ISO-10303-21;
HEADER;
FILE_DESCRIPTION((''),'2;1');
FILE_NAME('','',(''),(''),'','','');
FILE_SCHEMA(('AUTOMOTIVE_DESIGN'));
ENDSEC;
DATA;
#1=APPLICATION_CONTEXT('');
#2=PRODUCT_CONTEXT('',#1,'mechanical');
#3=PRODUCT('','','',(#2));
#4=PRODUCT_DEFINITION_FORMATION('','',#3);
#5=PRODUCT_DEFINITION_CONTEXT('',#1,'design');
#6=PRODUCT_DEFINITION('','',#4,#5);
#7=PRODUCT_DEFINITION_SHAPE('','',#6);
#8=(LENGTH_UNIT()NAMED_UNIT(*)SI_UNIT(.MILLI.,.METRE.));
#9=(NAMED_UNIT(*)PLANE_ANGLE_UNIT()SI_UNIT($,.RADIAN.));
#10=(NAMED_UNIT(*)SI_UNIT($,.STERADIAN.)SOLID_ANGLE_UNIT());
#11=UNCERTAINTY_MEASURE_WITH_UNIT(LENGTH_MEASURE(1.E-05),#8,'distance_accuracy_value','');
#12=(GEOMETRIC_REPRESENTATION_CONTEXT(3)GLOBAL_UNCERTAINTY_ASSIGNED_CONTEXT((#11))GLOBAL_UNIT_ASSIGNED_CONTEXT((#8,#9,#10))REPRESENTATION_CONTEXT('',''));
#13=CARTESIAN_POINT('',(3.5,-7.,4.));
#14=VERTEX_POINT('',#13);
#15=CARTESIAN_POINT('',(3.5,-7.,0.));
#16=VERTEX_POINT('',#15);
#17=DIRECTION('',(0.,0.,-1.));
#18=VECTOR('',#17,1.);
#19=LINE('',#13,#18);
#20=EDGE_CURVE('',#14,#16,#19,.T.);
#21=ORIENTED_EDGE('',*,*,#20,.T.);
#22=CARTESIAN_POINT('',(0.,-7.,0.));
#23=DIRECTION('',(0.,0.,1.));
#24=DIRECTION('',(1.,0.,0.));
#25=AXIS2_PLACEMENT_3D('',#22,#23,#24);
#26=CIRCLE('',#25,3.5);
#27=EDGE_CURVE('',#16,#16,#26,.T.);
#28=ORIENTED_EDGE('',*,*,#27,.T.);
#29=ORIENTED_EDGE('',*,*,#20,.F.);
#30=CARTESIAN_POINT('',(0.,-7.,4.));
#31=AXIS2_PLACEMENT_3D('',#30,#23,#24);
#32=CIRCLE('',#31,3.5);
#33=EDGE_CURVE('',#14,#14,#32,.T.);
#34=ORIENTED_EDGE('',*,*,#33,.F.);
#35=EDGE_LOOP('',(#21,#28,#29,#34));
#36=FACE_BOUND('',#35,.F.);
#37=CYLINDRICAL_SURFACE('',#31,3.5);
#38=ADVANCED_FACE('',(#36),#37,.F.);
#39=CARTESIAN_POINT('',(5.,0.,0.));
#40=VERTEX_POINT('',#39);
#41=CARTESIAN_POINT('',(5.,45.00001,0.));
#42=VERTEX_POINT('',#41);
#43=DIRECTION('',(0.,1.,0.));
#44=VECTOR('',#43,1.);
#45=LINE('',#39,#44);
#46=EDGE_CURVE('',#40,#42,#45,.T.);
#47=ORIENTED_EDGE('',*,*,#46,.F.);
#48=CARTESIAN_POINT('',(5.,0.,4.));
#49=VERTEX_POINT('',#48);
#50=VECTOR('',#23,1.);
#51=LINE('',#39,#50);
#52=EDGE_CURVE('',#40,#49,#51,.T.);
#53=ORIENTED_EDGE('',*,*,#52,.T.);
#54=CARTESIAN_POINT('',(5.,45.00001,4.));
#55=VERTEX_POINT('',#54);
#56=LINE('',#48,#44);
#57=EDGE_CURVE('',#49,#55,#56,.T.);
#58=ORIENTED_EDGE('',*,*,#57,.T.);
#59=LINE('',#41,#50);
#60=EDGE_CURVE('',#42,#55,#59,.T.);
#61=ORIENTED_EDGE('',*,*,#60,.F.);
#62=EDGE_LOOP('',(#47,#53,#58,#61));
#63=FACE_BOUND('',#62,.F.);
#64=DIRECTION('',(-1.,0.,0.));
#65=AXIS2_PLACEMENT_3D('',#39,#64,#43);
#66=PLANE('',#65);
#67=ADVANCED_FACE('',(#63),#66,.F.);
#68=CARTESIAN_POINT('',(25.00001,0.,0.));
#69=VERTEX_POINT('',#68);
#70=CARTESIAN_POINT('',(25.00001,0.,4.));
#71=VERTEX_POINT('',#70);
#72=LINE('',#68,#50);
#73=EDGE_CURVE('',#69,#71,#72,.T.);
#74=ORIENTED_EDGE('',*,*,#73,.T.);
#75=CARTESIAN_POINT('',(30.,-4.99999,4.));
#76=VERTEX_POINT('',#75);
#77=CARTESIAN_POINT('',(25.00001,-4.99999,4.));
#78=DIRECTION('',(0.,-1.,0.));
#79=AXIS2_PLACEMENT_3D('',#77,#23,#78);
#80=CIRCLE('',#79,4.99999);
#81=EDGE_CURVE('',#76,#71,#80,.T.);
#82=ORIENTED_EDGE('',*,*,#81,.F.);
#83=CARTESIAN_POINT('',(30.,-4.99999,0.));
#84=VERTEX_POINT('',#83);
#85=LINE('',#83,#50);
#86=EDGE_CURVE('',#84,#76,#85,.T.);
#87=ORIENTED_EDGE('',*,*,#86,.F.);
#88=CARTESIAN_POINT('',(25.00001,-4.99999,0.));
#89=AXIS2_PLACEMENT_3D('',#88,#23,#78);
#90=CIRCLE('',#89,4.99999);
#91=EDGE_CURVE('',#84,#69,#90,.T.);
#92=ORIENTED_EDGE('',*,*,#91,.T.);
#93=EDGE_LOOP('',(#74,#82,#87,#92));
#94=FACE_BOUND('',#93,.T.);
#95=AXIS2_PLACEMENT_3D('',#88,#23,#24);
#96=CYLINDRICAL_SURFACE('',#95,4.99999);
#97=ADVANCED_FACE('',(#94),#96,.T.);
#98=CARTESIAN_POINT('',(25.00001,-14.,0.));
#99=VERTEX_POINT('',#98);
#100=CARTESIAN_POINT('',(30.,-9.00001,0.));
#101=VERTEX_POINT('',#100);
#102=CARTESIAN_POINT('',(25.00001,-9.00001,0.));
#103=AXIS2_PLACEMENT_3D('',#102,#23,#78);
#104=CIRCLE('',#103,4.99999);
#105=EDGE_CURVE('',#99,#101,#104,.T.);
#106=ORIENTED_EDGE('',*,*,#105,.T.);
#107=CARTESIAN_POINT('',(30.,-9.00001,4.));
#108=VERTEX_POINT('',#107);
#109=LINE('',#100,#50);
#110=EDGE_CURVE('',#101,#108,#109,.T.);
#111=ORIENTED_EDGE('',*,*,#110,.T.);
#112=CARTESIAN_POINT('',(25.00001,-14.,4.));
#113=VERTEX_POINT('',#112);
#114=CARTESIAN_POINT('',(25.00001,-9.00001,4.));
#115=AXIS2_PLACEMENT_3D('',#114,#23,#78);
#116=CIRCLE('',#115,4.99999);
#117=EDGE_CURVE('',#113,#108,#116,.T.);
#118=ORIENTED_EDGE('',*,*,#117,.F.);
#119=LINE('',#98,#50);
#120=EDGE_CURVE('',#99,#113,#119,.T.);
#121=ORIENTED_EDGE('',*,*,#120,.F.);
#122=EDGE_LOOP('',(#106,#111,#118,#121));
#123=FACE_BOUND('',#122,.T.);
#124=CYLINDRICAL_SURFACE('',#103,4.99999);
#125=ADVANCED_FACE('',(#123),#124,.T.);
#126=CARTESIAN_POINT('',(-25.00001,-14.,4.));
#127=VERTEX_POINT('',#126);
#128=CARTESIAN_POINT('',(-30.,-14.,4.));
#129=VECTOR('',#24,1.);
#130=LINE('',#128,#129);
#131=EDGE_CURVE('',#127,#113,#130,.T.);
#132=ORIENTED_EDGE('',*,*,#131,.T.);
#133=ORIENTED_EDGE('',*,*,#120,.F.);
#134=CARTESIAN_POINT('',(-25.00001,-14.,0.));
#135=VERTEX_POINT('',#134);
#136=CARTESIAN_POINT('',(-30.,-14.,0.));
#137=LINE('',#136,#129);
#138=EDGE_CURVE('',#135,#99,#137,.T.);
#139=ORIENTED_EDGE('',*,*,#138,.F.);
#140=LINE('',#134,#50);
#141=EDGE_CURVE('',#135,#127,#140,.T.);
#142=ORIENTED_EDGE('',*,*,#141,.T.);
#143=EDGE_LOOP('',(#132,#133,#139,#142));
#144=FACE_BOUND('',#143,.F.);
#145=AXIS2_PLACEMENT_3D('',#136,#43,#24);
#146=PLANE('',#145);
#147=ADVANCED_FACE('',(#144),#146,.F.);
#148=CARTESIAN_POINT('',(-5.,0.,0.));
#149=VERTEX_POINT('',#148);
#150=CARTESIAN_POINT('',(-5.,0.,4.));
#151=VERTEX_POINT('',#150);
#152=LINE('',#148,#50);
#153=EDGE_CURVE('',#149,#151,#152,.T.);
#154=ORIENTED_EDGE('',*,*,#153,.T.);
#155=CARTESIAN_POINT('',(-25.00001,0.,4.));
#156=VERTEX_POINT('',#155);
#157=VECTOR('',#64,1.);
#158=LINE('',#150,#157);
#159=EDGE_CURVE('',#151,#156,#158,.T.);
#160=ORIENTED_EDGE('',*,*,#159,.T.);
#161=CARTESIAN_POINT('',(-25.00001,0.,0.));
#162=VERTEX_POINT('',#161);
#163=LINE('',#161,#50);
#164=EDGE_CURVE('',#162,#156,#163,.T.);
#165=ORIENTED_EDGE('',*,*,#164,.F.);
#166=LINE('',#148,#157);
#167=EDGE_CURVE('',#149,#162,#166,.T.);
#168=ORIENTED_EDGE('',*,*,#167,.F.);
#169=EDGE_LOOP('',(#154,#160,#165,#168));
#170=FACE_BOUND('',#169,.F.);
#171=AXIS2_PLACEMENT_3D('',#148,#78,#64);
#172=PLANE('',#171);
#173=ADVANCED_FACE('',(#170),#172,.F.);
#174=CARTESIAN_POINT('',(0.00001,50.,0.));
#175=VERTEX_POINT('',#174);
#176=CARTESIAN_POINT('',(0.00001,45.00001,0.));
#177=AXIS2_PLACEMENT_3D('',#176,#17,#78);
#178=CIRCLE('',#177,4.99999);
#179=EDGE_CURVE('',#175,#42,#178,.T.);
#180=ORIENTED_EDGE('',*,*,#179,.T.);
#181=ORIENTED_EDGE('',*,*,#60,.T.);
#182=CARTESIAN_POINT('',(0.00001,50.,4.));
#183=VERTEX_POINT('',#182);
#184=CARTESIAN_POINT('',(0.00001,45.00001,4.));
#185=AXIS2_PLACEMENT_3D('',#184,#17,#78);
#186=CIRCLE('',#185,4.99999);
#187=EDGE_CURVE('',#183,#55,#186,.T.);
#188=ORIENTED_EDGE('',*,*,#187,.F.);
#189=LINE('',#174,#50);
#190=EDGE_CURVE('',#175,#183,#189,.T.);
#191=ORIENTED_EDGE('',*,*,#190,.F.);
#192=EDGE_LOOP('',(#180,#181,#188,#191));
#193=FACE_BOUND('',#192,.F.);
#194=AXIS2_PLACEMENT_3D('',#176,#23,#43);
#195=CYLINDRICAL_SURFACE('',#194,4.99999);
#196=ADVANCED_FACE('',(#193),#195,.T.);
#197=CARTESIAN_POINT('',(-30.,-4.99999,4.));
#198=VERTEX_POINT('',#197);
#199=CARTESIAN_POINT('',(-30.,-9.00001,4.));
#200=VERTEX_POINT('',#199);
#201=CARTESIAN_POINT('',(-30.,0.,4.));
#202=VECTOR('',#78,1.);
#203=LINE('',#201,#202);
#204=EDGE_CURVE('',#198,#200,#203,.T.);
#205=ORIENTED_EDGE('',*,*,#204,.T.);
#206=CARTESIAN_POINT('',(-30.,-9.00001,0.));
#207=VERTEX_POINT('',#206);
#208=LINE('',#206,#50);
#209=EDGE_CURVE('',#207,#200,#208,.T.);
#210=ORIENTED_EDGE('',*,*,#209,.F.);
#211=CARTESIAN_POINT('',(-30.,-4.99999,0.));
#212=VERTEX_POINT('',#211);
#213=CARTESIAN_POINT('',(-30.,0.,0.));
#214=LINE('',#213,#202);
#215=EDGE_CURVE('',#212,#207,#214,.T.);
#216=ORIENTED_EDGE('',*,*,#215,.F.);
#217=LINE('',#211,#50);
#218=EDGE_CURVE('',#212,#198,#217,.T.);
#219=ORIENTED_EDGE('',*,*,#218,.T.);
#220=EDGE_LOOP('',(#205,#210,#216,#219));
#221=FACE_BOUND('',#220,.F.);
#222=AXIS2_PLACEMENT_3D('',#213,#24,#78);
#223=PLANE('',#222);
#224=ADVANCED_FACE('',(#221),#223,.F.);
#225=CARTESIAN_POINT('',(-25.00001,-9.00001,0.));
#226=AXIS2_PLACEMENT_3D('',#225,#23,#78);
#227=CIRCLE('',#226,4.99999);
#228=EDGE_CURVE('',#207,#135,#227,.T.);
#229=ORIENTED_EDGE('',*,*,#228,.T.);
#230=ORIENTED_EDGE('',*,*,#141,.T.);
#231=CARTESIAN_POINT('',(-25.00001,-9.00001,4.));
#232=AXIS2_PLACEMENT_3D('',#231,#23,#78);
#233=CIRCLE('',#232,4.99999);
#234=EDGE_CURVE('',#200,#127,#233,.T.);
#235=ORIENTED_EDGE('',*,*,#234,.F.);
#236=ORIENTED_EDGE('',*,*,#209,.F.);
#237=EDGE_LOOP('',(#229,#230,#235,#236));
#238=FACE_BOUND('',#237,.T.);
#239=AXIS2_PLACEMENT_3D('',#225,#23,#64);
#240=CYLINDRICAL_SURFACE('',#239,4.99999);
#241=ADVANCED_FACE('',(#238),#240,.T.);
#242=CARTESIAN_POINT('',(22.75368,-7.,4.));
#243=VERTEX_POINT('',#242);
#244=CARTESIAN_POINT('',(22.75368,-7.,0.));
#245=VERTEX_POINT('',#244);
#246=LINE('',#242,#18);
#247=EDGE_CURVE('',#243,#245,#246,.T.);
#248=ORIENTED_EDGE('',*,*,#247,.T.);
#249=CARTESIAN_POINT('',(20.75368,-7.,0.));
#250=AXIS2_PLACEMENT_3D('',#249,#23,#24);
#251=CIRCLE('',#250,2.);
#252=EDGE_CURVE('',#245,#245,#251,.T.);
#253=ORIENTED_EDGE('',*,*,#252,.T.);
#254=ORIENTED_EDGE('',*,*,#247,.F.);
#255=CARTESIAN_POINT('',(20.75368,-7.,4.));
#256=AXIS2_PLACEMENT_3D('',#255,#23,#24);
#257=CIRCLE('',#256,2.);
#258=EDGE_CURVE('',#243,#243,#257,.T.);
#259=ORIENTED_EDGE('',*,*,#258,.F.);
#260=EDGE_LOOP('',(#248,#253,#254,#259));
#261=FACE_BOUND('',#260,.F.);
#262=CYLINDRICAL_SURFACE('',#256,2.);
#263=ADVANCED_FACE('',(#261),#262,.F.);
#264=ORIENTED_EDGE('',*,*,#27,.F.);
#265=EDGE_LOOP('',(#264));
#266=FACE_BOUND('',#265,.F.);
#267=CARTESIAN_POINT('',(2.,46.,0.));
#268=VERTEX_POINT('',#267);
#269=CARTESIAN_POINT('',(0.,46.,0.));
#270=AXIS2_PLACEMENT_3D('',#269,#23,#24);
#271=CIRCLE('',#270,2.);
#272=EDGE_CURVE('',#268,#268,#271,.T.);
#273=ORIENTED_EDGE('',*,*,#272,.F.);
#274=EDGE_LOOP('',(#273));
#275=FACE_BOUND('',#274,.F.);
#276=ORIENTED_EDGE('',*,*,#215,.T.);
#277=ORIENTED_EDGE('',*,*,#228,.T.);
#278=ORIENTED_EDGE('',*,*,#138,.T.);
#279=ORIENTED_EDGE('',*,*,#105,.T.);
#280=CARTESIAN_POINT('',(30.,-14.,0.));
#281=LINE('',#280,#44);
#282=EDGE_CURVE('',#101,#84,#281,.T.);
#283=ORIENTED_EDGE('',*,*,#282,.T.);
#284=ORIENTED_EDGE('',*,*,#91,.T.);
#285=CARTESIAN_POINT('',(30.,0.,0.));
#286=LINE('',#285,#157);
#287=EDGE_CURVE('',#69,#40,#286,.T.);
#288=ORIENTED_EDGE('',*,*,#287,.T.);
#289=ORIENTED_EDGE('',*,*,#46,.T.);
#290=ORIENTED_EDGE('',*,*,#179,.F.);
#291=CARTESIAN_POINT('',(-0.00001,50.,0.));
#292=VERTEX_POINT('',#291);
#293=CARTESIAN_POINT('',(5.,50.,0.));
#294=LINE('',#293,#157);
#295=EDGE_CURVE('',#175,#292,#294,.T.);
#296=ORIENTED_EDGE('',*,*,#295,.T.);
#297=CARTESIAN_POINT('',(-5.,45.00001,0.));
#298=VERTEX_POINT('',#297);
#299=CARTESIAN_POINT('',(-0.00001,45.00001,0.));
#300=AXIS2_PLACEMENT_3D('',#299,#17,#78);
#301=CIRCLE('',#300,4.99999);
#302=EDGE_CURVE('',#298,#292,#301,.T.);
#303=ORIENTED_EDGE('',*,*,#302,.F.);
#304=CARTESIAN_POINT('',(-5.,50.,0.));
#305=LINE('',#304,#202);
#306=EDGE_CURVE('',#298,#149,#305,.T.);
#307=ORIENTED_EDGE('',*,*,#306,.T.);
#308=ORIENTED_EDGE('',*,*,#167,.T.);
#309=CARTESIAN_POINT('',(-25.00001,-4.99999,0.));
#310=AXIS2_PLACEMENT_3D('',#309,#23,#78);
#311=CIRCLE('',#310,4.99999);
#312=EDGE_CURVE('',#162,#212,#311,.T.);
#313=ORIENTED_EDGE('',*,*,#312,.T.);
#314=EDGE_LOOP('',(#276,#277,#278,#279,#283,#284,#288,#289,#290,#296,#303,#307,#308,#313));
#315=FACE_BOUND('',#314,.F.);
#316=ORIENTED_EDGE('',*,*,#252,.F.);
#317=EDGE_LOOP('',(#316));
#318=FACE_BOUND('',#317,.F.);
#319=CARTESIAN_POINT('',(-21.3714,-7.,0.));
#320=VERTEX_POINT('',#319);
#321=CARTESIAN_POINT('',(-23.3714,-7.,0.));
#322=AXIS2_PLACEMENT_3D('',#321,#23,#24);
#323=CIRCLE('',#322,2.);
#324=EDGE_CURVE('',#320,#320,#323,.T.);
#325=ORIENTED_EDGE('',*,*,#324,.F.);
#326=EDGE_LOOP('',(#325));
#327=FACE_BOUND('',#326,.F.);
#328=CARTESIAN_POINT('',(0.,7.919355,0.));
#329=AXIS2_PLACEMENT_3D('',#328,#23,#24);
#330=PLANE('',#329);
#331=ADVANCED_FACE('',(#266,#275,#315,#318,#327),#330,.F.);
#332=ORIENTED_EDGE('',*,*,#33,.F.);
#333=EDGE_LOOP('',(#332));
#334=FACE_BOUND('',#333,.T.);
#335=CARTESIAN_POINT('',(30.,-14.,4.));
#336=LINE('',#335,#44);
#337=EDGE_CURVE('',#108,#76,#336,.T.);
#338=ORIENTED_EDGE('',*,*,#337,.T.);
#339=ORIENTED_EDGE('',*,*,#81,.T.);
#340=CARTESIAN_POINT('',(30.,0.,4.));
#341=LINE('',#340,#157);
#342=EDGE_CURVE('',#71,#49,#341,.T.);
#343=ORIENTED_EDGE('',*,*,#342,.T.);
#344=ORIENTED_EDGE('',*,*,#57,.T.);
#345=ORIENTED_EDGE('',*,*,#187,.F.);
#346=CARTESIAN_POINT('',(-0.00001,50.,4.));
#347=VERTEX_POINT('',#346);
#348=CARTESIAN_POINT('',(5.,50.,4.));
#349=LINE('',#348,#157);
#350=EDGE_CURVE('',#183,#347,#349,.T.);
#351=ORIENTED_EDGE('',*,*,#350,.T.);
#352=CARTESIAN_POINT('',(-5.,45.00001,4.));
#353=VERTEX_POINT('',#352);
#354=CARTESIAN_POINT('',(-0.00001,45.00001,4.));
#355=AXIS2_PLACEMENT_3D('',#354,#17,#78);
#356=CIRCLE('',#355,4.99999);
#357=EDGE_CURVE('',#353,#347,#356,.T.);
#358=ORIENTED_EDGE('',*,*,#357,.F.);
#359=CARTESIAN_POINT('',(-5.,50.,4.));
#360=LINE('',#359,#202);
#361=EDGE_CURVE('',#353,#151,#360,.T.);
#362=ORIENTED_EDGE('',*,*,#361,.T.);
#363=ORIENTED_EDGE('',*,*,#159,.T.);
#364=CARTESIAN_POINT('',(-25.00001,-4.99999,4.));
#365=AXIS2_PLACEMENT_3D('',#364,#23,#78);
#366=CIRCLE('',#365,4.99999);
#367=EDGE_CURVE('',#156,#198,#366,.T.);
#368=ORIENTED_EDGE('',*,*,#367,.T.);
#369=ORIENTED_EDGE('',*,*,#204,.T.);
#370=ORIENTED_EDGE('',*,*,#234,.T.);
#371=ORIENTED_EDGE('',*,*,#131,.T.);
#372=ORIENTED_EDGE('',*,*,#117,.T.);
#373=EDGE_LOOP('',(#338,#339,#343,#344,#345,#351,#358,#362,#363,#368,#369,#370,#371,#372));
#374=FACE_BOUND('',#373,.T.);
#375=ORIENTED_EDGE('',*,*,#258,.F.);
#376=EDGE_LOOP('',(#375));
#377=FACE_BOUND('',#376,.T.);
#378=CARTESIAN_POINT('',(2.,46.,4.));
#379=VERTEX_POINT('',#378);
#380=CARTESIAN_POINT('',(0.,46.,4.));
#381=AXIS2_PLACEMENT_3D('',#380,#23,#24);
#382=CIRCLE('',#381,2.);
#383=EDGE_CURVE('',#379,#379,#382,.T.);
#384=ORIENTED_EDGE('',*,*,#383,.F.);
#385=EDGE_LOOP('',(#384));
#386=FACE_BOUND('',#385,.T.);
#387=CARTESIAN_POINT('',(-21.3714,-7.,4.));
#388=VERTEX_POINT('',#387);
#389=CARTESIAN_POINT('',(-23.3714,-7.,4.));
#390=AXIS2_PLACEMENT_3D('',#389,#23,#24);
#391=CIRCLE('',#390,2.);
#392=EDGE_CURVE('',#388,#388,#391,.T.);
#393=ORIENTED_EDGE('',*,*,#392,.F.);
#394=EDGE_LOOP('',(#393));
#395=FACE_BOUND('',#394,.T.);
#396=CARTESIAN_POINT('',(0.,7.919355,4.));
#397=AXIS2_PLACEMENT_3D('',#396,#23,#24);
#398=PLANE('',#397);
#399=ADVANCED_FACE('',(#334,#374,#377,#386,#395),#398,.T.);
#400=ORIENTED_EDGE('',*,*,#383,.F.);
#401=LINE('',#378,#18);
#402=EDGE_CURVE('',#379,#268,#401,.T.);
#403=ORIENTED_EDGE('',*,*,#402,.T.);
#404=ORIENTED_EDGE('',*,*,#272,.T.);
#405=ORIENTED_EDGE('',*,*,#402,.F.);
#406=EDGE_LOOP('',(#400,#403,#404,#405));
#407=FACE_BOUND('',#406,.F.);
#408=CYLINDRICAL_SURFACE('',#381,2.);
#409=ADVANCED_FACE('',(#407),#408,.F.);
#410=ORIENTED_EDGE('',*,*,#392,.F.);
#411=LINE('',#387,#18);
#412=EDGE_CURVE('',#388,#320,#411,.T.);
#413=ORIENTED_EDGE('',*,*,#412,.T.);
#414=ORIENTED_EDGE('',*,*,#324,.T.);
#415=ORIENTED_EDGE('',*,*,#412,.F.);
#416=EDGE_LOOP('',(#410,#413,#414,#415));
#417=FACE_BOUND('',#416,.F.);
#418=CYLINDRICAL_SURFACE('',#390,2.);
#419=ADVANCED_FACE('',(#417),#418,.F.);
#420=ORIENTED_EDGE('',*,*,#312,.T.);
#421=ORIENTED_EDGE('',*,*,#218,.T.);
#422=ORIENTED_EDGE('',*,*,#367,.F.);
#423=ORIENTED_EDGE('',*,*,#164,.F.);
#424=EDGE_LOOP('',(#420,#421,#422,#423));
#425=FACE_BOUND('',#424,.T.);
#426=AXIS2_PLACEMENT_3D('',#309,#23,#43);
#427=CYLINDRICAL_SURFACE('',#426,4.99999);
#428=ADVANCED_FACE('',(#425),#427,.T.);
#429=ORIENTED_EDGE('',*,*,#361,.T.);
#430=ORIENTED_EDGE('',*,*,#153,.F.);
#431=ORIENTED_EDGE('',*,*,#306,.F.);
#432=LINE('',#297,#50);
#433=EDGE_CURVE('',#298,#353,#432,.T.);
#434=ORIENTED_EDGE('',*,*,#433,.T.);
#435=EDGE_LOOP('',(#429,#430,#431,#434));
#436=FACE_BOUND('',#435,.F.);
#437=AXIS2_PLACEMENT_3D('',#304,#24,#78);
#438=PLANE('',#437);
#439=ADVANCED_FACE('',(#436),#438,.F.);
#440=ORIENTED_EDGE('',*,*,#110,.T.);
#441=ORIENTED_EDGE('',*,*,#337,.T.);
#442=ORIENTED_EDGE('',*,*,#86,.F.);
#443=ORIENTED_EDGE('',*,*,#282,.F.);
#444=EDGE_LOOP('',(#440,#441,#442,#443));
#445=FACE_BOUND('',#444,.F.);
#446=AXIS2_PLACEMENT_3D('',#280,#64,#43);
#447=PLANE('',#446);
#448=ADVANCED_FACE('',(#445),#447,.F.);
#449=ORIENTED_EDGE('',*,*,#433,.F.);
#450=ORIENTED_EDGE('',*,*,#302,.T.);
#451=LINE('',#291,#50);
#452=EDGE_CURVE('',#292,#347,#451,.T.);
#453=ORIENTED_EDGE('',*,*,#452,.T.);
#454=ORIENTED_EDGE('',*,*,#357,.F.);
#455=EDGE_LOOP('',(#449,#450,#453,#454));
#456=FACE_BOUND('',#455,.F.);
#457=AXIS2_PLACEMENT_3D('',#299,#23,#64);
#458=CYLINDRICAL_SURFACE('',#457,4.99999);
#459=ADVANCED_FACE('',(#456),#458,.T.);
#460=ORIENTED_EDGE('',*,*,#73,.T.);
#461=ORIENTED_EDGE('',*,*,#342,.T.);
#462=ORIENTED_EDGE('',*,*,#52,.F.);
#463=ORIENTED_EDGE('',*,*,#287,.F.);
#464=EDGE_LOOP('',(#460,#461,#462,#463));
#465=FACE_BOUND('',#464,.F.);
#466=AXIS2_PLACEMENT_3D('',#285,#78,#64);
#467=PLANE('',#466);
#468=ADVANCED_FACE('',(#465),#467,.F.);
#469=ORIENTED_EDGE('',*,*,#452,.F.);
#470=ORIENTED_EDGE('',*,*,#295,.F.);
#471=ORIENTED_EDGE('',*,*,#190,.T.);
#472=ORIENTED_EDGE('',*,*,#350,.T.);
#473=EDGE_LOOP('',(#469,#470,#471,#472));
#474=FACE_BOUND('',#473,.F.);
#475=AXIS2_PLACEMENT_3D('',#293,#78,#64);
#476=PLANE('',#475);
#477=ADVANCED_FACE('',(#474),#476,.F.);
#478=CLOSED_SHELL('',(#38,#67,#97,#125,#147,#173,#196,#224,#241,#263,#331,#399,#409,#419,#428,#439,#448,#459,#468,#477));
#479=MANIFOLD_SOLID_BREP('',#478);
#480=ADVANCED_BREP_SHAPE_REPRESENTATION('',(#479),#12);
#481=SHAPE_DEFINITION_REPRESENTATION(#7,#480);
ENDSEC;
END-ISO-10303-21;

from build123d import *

# Parameters (mm, degrees)
F1_DEPTH = 4
F2_R     = 2
F2_R_2   = 3.5
F3_DEPTH = 25
F4_R     = 4.99999


# Not quite as in the source:
# - a fillet or chamfer is up to 0.001 mm smaller than in the source, because OpenCascade refuses the exact size


with BuildPart() as f1:
    # F0 (on Top) → F1 (new body)
    with BuildSketch(Plane.XY):
        Polygon((-5, 0), (-30, 0), (-30, -14), (30, -14), (30, 0), (5, 0), (5, 50), (-5, 50), align=None)
    extrude(amount=F1_DEPTH)

    # F2 (on face) → F3 (cut)
    with BuildSketch(Plane.XY.offset(4)):
        with Locations((-23.3714003116, -7)):
            Circle(F2_R)
        with Locations((20.7536797971, -7)):
            Circle(F2_R)
        with Locations((0, -7)):
            Circle(F2_R_2)
        with Locations((0, 46)):
            Circle(F2_R)
    extrude(amount=-F3_DEPTH, mode=Mode.SUBTRACT)

    # F4 (radius 5 in the source; OpenCascade refuses exactly that, so slightly less here)
    f4_edges = [f1.edges().sort_by_distance(p)[0] for p in [
        (-5, 50, 2),
        (5, 50, 2),
        (30, 0, 2),
        (30, -14, 2),
        (-30, -14, 2),
        (-30, 0, 2),
    ]]
    fillet(f4_edges, radius=F4_R)


solid = f1.part
